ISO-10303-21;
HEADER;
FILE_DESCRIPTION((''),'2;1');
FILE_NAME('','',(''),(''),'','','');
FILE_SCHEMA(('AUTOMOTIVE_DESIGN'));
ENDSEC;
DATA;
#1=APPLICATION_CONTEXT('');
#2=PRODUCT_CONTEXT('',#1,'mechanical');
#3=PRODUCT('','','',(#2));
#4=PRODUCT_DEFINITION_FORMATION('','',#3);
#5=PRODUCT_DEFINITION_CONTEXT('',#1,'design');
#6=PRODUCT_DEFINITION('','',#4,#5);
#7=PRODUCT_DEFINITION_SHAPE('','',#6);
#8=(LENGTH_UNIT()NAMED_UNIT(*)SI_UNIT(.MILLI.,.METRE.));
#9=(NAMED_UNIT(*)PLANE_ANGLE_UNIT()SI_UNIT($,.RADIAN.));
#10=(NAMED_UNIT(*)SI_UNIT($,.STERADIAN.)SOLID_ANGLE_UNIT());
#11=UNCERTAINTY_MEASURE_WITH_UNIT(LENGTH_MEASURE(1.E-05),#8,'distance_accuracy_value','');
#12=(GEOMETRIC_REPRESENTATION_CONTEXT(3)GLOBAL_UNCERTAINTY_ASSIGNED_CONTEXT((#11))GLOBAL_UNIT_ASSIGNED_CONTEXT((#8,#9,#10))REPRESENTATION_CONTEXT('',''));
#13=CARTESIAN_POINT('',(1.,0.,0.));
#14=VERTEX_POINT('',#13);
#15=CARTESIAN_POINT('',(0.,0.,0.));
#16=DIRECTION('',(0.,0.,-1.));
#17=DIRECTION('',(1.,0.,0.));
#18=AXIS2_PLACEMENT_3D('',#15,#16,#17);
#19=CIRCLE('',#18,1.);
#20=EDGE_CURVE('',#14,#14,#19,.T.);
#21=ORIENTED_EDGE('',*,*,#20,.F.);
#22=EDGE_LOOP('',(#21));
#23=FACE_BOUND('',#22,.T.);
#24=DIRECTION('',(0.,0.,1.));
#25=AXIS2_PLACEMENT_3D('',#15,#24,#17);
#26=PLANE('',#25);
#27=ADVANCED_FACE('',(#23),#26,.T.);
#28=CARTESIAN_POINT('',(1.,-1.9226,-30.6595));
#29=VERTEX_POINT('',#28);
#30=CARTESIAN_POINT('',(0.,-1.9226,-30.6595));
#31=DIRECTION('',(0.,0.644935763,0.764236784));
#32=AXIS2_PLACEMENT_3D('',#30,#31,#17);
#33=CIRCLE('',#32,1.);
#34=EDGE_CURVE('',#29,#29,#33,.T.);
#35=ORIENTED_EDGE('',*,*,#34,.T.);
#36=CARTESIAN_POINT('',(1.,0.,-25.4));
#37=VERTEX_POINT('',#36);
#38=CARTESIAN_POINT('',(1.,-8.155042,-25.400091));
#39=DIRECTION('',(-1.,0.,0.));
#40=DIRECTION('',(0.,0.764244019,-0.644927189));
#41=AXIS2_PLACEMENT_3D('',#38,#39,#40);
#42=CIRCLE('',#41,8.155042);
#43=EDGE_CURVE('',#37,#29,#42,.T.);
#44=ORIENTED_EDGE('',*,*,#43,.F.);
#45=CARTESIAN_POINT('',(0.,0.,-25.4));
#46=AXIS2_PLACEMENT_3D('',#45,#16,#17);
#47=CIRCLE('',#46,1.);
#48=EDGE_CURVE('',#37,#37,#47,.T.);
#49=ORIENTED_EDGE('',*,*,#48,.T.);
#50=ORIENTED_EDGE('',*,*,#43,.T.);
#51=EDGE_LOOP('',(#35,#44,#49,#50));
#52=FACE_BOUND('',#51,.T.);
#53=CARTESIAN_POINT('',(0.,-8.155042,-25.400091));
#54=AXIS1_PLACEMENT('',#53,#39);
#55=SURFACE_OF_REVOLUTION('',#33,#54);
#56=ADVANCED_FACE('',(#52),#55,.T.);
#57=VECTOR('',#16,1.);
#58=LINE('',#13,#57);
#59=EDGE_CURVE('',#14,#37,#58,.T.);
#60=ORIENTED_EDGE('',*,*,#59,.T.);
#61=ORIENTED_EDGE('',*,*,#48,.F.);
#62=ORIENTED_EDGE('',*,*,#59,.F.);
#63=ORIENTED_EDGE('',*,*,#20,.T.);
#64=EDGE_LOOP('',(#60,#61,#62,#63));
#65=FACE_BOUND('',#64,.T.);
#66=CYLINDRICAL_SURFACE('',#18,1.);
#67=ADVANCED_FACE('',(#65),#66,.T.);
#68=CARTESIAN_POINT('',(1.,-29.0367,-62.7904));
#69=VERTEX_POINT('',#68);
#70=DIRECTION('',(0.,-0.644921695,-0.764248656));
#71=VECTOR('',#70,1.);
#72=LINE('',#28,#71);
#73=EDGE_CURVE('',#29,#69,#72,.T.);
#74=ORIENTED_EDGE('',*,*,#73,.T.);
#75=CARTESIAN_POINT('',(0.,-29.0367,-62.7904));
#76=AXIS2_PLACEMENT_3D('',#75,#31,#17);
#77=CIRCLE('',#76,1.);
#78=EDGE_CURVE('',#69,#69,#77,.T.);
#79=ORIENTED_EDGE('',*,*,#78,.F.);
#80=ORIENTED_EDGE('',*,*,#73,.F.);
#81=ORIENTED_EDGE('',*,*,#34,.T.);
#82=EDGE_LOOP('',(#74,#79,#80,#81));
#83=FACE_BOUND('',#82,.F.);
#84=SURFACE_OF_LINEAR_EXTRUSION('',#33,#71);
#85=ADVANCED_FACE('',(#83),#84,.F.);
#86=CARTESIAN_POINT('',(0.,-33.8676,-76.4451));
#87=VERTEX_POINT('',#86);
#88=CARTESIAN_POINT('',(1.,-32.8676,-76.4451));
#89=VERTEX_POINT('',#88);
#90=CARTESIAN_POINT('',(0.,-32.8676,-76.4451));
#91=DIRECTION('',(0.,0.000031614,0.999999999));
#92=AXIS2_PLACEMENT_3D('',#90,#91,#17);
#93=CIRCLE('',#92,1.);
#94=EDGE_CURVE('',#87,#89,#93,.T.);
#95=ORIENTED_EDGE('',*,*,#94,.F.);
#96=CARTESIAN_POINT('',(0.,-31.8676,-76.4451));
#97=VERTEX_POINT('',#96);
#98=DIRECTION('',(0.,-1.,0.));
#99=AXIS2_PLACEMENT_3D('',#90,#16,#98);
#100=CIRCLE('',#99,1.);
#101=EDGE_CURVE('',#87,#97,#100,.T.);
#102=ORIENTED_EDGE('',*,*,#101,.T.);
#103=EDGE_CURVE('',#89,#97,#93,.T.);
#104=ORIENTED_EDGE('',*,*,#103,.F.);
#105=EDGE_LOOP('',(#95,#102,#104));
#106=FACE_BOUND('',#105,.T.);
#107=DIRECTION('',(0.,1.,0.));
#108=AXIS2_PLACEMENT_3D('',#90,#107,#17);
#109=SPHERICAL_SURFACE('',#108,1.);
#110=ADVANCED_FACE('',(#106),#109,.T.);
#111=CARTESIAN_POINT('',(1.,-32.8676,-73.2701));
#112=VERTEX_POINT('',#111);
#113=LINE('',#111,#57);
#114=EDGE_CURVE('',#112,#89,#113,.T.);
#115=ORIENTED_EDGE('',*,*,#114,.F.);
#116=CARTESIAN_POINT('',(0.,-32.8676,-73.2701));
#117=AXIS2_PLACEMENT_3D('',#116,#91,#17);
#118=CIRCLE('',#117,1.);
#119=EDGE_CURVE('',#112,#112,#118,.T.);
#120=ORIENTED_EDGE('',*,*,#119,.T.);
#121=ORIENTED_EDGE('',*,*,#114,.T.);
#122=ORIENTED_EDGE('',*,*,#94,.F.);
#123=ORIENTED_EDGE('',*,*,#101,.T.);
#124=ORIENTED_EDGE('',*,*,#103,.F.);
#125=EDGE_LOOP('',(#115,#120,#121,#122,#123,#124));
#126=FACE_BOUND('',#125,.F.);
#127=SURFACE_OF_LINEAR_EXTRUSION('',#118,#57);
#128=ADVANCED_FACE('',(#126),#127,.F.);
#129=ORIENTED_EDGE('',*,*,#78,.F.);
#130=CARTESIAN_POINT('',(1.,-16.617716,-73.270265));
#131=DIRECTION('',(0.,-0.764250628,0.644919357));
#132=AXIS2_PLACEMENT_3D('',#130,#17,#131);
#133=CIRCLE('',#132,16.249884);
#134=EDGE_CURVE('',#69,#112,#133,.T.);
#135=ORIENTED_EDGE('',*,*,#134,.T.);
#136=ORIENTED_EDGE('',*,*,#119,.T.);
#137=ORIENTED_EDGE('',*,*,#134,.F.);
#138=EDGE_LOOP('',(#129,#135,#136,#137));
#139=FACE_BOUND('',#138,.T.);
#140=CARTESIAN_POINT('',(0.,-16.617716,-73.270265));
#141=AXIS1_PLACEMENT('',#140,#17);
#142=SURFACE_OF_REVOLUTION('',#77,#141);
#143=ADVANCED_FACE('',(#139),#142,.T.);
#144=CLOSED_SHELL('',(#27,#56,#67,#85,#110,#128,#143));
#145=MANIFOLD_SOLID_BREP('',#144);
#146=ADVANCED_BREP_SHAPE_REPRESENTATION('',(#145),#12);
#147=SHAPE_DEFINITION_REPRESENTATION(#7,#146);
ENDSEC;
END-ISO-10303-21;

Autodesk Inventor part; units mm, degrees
ref_plane "YZ Plane" through (0, 0, 0) normal (1, 0, 0) x (0, 1, 0)
ref_plane "XZ Plane" through (0, 0, 0) normal (0, 1, 0) x (-1, 0, 0)
ref_plane "XY Plane" through (0, 0, 0) normal (0, 0, 1) x (1, 0, 0)
sketch "Sketch2" plane through (0, 0, 0) normal (1, 0, 0) x (0, 1, 0)
  line L0 (0, 0) -> (0, -25.4)
  arc A0 (-1.9226, -30.6595) -> (0, -25.4) centre (-8.1552, -25.4) ccw
  line L1 (-1.9226, -30.6595) -> (-29.0367, -62.7904)
  arc A1 (-29.0367, -62.7904) -> (-32.8676, -73.2701) centre (-16.618, -73.2701) ccw
  line L2 (-32.8676, -73.2701) -> (-32.8676, -76.4451)
  dimension "d3" = 25.4
  dimension "d4" = 8.1552
  dimension "d5" = 16.2496
  dimension "d6" = 3.175
  dimension "d7" = 32.8676
sketch "Sketch3" plane through (0, 0, 0) normal (0, 0, 1) x (1, 0, 0)
  circle A0 centre (0, 0) radius 1
  dimension "d8" = 2
sweep "Sweep1" add profiles "Sketch3" path "Sketch2"
sketch "Sketch9" plane through (0, 0, 0) normal (1, 0, 0) x (0, 1, 0)
  line L0 (-33.8676, -76.4451) -> (-31.8676, -76.4451) projected
  arc A0 (-33.8676, -76.4451) -> (-31.8676, -76.4451) centre (-32.8676, -76.4451) ccw
  line L1 (-31.8676, -73.2701) -> (-31.8676, -76.4451) projected
  line L2 (-31.8676, -76.4451) -> (-33.8676, -76.4451)
  point P0 (0, 0)
revolve "Revolution2" add sketch "Sketch9" angle 180 mid plane about axis through (0, -33.8676, -76.4451) along (0, 1, 0)
properties part number "2mmToDive" material "Brass, Soft Yellow, Welded"
